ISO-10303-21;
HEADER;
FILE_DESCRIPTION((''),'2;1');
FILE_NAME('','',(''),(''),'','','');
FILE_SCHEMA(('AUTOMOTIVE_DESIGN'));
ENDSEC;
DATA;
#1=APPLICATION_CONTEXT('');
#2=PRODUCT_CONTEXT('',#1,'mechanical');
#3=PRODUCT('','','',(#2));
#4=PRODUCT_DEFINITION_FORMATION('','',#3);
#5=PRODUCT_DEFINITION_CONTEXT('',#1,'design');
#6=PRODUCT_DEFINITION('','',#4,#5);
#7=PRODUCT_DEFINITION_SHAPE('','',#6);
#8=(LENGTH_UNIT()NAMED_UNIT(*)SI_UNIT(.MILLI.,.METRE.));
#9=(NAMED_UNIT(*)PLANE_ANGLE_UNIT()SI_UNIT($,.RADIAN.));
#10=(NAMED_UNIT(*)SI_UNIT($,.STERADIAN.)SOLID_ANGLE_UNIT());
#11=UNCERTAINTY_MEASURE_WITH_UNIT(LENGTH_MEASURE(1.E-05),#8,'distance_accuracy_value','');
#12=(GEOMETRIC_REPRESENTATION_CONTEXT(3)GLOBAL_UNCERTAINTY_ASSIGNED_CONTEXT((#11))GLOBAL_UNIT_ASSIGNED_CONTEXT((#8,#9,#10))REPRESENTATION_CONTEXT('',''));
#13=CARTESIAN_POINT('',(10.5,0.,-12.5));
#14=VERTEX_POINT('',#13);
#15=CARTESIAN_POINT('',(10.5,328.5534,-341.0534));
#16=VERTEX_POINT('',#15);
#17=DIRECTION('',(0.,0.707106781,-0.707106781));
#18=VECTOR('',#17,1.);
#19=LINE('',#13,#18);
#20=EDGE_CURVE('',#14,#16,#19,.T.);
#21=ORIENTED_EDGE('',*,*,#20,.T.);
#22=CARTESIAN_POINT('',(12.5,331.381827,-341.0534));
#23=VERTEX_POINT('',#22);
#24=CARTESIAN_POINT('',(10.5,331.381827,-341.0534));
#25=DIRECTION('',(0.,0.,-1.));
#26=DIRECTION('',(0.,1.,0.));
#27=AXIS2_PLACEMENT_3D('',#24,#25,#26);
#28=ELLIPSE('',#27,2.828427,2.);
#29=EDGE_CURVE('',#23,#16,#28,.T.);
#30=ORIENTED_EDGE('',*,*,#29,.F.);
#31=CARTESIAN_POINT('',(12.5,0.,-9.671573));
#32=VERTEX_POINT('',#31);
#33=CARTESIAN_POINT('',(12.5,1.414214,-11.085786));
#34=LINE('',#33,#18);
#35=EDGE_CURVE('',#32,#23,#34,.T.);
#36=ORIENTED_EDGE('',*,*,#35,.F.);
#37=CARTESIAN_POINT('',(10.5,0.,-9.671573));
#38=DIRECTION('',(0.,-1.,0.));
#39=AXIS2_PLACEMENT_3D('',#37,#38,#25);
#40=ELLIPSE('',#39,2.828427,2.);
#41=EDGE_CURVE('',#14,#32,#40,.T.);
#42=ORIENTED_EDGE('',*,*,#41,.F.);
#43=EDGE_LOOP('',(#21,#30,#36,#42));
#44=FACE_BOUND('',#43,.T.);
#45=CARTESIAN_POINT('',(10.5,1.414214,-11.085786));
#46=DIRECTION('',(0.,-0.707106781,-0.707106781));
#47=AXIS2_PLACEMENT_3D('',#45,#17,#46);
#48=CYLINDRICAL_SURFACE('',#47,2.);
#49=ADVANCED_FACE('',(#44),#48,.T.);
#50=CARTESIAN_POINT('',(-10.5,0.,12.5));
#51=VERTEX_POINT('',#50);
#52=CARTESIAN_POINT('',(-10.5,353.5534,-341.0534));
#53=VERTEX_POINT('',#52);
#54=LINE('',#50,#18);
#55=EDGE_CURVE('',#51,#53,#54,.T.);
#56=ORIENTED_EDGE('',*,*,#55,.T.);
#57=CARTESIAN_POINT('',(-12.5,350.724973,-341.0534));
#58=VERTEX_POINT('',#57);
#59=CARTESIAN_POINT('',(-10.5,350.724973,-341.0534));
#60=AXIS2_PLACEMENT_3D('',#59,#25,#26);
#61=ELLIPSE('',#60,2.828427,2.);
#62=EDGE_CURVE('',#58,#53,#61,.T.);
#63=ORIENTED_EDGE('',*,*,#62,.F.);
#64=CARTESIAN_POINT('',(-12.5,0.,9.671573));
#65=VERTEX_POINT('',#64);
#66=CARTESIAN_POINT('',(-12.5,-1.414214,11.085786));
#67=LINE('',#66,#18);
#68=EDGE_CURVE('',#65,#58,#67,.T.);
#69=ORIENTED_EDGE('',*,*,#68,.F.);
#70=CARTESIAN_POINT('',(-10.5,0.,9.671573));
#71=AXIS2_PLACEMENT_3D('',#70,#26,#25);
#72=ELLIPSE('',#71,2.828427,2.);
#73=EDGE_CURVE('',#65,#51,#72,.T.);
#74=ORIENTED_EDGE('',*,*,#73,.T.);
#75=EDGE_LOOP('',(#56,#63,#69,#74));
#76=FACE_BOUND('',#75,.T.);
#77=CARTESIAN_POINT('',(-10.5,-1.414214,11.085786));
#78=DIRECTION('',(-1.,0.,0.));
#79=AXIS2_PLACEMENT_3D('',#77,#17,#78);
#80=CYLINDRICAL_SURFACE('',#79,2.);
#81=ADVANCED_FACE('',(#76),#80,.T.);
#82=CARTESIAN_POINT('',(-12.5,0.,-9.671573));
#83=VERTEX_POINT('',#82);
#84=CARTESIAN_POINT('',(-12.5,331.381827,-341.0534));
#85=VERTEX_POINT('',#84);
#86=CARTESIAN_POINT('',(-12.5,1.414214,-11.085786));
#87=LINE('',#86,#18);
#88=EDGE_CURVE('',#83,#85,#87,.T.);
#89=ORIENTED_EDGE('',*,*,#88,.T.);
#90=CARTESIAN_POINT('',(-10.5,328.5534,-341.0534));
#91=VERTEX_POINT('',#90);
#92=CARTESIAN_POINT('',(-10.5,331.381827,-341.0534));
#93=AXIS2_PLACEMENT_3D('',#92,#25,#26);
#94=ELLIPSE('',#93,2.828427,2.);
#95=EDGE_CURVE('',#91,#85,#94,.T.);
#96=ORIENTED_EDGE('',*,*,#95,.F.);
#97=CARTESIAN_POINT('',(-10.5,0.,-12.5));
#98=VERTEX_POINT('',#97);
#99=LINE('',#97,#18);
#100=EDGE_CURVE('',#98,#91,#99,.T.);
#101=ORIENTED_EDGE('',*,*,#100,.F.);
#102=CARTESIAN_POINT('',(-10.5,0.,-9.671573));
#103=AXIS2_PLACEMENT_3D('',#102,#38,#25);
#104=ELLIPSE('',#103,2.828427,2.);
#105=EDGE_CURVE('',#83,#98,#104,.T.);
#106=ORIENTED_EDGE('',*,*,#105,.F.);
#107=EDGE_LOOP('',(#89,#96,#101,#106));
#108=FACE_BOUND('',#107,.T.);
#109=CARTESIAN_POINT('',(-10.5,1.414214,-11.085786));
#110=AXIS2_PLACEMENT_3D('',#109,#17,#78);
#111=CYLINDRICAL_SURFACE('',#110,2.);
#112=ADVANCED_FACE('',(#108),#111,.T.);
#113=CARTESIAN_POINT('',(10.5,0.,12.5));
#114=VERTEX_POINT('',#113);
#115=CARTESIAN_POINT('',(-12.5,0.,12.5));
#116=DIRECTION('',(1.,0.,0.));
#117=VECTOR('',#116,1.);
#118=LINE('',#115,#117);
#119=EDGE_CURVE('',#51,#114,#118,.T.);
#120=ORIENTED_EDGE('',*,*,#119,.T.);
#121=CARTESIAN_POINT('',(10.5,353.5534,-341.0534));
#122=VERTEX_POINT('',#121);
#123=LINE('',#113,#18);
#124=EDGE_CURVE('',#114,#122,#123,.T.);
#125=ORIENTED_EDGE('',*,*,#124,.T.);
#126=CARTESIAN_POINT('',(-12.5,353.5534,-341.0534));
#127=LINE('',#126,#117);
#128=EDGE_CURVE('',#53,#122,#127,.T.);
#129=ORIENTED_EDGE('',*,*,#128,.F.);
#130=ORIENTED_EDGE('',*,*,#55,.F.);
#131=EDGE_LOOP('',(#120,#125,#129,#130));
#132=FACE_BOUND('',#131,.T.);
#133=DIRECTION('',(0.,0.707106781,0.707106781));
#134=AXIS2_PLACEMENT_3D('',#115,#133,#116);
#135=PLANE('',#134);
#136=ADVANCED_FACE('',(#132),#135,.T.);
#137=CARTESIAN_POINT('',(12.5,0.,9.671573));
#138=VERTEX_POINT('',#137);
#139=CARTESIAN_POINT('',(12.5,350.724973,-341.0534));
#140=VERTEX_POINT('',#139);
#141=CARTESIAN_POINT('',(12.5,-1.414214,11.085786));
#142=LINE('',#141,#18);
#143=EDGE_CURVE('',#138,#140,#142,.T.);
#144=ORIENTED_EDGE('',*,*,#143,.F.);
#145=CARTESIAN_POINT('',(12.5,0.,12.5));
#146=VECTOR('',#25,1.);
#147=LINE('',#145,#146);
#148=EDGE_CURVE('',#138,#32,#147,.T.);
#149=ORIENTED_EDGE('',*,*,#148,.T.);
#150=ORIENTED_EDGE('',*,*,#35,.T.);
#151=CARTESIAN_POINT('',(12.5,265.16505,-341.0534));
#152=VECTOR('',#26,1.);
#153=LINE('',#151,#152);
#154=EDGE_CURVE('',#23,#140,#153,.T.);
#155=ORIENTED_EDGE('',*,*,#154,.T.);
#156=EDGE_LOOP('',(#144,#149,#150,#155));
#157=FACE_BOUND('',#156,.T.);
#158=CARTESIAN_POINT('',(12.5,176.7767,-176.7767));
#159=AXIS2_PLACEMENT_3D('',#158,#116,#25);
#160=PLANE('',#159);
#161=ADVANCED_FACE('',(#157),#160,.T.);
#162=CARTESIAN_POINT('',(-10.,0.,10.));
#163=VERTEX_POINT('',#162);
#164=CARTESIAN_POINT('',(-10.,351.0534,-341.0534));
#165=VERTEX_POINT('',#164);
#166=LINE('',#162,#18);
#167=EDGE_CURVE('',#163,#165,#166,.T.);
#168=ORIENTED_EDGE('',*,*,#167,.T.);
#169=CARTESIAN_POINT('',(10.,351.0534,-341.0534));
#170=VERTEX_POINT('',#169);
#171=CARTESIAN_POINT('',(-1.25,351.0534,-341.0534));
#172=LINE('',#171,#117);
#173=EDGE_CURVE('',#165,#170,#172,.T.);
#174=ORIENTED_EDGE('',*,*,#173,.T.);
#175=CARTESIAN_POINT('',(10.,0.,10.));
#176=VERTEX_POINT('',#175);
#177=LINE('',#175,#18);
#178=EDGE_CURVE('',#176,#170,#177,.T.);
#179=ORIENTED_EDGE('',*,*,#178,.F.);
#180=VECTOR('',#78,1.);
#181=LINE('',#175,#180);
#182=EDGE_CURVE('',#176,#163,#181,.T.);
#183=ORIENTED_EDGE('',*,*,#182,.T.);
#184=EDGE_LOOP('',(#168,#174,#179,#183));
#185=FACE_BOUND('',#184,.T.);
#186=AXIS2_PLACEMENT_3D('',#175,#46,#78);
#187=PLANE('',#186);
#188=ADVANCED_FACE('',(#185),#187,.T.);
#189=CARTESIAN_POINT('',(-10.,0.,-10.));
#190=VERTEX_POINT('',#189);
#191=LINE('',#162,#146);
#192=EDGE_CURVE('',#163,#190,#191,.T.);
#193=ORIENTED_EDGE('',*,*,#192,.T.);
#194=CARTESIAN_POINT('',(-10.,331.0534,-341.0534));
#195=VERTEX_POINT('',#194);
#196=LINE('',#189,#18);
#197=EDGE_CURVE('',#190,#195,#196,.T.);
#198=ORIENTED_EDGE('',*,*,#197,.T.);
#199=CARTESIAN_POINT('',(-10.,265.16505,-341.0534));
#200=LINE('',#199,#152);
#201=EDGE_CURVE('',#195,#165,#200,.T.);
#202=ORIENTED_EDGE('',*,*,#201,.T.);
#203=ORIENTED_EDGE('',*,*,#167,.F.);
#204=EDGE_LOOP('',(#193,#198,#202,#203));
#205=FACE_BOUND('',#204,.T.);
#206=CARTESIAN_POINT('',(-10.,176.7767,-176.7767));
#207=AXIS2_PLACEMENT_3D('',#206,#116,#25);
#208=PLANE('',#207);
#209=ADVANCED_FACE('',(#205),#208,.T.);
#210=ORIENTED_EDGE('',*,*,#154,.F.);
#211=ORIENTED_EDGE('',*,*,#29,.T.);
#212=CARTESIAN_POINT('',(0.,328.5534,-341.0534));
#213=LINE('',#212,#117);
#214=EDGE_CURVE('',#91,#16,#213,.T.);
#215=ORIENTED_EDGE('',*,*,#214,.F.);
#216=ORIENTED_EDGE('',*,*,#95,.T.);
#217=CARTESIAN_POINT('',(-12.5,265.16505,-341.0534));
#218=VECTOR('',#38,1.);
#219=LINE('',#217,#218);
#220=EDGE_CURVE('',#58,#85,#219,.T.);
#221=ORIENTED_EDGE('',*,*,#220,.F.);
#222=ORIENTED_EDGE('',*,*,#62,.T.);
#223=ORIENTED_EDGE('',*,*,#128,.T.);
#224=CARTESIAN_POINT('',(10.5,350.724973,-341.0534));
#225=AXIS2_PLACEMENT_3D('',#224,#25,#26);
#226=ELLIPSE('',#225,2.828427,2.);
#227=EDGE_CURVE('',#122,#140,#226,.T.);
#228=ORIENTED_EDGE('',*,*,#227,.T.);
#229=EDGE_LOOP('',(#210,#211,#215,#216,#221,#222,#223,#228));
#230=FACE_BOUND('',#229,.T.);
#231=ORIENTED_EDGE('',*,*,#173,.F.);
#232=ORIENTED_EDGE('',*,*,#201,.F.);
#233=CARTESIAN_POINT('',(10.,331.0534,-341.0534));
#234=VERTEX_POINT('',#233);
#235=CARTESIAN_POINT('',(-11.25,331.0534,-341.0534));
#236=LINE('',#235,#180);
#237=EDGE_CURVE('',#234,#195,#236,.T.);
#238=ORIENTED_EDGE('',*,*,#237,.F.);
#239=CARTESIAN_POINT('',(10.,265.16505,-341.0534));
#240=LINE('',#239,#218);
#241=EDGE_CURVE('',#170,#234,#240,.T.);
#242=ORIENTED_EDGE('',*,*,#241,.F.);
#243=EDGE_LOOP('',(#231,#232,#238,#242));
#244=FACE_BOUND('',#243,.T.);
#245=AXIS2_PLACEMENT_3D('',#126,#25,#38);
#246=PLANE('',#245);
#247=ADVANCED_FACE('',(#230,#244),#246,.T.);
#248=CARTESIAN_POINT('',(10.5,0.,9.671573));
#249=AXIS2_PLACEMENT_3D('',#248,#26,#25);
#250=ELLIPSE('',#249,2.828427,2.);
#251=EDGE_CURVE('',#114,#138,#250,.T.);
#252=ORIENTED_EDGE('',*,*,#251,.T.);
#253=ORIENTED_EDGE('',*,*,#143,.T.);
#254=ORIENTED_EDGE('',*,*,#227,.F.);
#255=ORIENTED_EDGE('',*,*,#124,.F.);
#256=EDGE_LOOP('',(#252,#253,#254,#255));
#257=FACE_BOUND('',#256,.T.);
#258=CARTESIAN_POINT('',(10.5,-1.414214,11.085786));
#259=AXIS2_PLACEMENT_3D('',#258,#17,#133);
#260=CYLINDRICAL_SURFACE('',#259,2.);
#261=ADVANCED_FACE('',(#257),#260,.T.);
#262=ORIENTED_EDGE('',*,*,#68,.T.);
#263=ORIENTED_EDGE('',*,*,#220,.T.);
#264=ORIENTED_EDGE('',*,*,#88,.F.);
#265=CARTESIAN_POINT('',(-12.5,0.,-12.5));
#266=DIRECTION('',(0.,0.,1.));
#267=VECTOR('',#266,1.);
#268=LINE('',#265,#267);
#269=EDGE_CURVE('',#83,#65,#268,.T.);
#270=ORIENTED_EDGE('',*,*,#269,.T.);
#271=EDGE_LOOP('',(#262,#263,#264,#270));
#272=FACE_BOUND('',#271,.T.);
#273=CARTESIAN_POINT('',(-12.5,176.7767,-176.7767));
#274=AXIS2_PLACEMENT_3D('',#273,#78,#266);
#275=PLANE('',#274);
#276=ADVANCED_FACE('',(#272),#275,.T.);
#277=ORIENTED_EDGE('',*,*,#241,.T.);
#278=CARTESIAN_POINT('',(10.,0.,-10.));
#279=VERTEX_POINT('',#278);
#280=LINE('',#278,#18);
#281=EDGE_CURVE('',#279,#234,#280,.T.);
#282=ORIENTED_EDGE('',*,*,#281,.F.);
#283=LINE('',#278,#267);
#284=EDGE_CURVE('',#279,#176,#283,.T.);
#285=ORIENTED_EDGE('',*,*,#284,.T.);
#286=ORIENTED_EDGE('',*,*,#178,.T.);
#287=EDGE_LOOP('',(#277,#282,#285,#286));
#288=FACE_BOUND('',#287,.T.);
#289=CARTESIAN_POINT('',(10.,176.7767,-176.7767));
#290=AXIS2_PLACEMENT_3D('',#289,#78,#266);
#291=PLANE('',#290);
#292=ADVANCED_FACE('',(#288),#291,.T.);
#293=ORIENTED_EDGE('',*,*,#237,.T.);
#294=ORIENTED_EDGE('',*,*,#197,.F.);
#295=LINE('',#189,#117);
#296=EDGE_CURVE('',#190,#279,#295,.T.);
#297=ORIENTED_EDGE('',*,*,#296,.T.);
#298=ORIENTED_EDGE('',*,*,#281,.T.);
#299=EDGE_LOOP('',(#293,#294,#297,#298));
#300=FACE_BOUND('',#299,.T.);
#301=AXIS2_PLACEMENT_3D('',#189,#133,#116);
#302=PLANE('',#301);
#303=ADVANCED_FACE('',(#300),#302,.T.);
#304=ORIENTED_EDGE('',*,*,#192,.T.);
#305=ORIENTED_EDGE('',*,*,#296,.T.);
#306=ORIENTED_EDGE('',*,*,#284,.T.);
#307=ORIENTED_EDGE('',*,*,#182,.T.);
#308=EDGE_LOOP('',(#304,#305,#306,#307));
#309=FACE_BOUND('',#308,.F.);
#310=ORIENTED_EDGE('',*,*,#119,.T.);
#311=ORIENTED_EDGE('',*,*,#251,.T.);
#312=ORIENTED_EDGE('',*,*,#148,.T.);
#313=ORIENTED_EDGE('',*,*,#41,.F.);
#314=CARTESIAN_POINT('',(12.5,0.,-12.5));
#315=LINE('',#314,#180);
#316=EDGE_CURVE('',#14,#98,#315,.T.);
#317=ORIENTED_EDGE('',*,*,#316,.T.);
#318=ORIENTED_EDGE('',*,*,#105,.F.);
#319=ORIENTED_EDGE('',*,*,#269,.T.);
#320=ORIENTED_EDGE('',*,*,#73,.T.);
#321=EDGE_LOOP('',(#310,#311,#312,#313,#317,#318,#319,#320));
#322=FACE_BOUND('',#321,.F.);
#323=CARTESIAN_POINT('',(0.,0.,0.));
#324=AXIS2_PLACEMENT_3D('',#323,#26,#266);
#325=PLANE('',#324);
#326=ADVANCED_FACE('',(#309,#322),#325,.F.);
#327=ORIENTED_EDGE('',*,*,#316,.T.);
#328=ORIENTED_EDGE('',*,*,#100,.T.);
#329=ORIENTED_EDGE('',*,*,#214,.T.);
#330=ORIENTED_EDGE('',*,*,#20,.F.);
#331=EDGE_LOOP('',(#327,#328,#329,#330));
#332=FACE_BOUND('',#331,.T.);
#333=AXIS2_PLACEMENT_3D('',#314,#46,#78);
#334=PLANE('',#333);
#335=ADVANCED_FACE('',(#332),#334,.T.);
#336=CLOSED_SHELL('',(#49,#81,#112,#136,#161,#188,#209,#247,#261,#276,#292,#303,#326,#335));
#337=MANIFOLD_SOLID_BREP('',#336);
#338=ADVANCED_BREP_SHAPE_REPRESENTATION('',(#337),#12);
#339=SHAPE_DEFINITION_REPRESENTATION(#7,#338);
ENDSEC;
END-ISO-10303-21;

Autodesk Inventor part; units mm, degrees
ref_plane "YZ Plane" through (0, 0, 0) normal (1, 0, 0) x (0, 1, 0)
ref_plane "XZ Plane" through (0, 0, 0) normal (0, 1, 0) x (-1, 0, 0)
sketch "profile" plane through (0, 0, 0) normal (0, 1, 0) x (-1, 0, 0)
  line L0 (12.5, 12.5) -> (-12.5, 12.5)
  line L1 (-12.5, 12.5) -> (-12.5, -12.5)
  line L2 (-12.5, -12.5) -> (12.5, -12.5)
  line L3 (12.5, -12.5) -> (12.5, 12.5)
  line L4 (-10, -10) -> (-10, 10)
  line L5 (-10, 10) -> (10, 10)
  line L6 (10, 10) -> (10, -10)
  line L7 (10, -10) -> (-10, -10)
  point P0 (0, 0)
  dimension "d0" = 12.5
  dimension "d1" = 25
  dimension "d2" = 25
  dimension "d3" = 12.5
  dimension "d6" = 2.5
sketch3d "3D Sketch1"
  line L0 (0, 0, 0) -> (0, 353.5534, -353.5534)
  dimension "d4" = 500
  dimension "d5" = 45
sweep "Sweep1" add profiles "profile" path "3D Sketch1"
fillet "Fillet1" radius 2 4 edges at (-12.5, 176.7767, -189.2767) (-12.5, 176.7767, -164.2767) (12.5, 176.7767, -164.2767) (12.5, 176.7767, -189.2767)
ref_plane "mirrored45" through (-12.5, 353.5534, -341.0534) normal (0, 0, 1) x (1, 0, 0)
split "Split1" plane through (-12.5, 353.5534, -341.0534) removes the side toward (0, 0, -1)
equation "\"d0\" = 0.5 * d1"
equation "\"d1\" = width"
equation "\"d2\" = d1"
equation "\"d3\" = 0.5 * d2"
equation "\"d6\" = t"
equation "\"d4\" = L"
equation "\"d5\" = angle"
equation "\"d9\" = filletRadius"
equation "\"t\" = 2.5"
equation "\"filletRadius\" = 2"
equation "\"angle\" = 45deg"
equation "\"width\" = 25"
equation "\"L\" = 500"
properties part number "bar_square_500mm_25sides_hollow_cut45deg" material "Steel, Galvanized"
